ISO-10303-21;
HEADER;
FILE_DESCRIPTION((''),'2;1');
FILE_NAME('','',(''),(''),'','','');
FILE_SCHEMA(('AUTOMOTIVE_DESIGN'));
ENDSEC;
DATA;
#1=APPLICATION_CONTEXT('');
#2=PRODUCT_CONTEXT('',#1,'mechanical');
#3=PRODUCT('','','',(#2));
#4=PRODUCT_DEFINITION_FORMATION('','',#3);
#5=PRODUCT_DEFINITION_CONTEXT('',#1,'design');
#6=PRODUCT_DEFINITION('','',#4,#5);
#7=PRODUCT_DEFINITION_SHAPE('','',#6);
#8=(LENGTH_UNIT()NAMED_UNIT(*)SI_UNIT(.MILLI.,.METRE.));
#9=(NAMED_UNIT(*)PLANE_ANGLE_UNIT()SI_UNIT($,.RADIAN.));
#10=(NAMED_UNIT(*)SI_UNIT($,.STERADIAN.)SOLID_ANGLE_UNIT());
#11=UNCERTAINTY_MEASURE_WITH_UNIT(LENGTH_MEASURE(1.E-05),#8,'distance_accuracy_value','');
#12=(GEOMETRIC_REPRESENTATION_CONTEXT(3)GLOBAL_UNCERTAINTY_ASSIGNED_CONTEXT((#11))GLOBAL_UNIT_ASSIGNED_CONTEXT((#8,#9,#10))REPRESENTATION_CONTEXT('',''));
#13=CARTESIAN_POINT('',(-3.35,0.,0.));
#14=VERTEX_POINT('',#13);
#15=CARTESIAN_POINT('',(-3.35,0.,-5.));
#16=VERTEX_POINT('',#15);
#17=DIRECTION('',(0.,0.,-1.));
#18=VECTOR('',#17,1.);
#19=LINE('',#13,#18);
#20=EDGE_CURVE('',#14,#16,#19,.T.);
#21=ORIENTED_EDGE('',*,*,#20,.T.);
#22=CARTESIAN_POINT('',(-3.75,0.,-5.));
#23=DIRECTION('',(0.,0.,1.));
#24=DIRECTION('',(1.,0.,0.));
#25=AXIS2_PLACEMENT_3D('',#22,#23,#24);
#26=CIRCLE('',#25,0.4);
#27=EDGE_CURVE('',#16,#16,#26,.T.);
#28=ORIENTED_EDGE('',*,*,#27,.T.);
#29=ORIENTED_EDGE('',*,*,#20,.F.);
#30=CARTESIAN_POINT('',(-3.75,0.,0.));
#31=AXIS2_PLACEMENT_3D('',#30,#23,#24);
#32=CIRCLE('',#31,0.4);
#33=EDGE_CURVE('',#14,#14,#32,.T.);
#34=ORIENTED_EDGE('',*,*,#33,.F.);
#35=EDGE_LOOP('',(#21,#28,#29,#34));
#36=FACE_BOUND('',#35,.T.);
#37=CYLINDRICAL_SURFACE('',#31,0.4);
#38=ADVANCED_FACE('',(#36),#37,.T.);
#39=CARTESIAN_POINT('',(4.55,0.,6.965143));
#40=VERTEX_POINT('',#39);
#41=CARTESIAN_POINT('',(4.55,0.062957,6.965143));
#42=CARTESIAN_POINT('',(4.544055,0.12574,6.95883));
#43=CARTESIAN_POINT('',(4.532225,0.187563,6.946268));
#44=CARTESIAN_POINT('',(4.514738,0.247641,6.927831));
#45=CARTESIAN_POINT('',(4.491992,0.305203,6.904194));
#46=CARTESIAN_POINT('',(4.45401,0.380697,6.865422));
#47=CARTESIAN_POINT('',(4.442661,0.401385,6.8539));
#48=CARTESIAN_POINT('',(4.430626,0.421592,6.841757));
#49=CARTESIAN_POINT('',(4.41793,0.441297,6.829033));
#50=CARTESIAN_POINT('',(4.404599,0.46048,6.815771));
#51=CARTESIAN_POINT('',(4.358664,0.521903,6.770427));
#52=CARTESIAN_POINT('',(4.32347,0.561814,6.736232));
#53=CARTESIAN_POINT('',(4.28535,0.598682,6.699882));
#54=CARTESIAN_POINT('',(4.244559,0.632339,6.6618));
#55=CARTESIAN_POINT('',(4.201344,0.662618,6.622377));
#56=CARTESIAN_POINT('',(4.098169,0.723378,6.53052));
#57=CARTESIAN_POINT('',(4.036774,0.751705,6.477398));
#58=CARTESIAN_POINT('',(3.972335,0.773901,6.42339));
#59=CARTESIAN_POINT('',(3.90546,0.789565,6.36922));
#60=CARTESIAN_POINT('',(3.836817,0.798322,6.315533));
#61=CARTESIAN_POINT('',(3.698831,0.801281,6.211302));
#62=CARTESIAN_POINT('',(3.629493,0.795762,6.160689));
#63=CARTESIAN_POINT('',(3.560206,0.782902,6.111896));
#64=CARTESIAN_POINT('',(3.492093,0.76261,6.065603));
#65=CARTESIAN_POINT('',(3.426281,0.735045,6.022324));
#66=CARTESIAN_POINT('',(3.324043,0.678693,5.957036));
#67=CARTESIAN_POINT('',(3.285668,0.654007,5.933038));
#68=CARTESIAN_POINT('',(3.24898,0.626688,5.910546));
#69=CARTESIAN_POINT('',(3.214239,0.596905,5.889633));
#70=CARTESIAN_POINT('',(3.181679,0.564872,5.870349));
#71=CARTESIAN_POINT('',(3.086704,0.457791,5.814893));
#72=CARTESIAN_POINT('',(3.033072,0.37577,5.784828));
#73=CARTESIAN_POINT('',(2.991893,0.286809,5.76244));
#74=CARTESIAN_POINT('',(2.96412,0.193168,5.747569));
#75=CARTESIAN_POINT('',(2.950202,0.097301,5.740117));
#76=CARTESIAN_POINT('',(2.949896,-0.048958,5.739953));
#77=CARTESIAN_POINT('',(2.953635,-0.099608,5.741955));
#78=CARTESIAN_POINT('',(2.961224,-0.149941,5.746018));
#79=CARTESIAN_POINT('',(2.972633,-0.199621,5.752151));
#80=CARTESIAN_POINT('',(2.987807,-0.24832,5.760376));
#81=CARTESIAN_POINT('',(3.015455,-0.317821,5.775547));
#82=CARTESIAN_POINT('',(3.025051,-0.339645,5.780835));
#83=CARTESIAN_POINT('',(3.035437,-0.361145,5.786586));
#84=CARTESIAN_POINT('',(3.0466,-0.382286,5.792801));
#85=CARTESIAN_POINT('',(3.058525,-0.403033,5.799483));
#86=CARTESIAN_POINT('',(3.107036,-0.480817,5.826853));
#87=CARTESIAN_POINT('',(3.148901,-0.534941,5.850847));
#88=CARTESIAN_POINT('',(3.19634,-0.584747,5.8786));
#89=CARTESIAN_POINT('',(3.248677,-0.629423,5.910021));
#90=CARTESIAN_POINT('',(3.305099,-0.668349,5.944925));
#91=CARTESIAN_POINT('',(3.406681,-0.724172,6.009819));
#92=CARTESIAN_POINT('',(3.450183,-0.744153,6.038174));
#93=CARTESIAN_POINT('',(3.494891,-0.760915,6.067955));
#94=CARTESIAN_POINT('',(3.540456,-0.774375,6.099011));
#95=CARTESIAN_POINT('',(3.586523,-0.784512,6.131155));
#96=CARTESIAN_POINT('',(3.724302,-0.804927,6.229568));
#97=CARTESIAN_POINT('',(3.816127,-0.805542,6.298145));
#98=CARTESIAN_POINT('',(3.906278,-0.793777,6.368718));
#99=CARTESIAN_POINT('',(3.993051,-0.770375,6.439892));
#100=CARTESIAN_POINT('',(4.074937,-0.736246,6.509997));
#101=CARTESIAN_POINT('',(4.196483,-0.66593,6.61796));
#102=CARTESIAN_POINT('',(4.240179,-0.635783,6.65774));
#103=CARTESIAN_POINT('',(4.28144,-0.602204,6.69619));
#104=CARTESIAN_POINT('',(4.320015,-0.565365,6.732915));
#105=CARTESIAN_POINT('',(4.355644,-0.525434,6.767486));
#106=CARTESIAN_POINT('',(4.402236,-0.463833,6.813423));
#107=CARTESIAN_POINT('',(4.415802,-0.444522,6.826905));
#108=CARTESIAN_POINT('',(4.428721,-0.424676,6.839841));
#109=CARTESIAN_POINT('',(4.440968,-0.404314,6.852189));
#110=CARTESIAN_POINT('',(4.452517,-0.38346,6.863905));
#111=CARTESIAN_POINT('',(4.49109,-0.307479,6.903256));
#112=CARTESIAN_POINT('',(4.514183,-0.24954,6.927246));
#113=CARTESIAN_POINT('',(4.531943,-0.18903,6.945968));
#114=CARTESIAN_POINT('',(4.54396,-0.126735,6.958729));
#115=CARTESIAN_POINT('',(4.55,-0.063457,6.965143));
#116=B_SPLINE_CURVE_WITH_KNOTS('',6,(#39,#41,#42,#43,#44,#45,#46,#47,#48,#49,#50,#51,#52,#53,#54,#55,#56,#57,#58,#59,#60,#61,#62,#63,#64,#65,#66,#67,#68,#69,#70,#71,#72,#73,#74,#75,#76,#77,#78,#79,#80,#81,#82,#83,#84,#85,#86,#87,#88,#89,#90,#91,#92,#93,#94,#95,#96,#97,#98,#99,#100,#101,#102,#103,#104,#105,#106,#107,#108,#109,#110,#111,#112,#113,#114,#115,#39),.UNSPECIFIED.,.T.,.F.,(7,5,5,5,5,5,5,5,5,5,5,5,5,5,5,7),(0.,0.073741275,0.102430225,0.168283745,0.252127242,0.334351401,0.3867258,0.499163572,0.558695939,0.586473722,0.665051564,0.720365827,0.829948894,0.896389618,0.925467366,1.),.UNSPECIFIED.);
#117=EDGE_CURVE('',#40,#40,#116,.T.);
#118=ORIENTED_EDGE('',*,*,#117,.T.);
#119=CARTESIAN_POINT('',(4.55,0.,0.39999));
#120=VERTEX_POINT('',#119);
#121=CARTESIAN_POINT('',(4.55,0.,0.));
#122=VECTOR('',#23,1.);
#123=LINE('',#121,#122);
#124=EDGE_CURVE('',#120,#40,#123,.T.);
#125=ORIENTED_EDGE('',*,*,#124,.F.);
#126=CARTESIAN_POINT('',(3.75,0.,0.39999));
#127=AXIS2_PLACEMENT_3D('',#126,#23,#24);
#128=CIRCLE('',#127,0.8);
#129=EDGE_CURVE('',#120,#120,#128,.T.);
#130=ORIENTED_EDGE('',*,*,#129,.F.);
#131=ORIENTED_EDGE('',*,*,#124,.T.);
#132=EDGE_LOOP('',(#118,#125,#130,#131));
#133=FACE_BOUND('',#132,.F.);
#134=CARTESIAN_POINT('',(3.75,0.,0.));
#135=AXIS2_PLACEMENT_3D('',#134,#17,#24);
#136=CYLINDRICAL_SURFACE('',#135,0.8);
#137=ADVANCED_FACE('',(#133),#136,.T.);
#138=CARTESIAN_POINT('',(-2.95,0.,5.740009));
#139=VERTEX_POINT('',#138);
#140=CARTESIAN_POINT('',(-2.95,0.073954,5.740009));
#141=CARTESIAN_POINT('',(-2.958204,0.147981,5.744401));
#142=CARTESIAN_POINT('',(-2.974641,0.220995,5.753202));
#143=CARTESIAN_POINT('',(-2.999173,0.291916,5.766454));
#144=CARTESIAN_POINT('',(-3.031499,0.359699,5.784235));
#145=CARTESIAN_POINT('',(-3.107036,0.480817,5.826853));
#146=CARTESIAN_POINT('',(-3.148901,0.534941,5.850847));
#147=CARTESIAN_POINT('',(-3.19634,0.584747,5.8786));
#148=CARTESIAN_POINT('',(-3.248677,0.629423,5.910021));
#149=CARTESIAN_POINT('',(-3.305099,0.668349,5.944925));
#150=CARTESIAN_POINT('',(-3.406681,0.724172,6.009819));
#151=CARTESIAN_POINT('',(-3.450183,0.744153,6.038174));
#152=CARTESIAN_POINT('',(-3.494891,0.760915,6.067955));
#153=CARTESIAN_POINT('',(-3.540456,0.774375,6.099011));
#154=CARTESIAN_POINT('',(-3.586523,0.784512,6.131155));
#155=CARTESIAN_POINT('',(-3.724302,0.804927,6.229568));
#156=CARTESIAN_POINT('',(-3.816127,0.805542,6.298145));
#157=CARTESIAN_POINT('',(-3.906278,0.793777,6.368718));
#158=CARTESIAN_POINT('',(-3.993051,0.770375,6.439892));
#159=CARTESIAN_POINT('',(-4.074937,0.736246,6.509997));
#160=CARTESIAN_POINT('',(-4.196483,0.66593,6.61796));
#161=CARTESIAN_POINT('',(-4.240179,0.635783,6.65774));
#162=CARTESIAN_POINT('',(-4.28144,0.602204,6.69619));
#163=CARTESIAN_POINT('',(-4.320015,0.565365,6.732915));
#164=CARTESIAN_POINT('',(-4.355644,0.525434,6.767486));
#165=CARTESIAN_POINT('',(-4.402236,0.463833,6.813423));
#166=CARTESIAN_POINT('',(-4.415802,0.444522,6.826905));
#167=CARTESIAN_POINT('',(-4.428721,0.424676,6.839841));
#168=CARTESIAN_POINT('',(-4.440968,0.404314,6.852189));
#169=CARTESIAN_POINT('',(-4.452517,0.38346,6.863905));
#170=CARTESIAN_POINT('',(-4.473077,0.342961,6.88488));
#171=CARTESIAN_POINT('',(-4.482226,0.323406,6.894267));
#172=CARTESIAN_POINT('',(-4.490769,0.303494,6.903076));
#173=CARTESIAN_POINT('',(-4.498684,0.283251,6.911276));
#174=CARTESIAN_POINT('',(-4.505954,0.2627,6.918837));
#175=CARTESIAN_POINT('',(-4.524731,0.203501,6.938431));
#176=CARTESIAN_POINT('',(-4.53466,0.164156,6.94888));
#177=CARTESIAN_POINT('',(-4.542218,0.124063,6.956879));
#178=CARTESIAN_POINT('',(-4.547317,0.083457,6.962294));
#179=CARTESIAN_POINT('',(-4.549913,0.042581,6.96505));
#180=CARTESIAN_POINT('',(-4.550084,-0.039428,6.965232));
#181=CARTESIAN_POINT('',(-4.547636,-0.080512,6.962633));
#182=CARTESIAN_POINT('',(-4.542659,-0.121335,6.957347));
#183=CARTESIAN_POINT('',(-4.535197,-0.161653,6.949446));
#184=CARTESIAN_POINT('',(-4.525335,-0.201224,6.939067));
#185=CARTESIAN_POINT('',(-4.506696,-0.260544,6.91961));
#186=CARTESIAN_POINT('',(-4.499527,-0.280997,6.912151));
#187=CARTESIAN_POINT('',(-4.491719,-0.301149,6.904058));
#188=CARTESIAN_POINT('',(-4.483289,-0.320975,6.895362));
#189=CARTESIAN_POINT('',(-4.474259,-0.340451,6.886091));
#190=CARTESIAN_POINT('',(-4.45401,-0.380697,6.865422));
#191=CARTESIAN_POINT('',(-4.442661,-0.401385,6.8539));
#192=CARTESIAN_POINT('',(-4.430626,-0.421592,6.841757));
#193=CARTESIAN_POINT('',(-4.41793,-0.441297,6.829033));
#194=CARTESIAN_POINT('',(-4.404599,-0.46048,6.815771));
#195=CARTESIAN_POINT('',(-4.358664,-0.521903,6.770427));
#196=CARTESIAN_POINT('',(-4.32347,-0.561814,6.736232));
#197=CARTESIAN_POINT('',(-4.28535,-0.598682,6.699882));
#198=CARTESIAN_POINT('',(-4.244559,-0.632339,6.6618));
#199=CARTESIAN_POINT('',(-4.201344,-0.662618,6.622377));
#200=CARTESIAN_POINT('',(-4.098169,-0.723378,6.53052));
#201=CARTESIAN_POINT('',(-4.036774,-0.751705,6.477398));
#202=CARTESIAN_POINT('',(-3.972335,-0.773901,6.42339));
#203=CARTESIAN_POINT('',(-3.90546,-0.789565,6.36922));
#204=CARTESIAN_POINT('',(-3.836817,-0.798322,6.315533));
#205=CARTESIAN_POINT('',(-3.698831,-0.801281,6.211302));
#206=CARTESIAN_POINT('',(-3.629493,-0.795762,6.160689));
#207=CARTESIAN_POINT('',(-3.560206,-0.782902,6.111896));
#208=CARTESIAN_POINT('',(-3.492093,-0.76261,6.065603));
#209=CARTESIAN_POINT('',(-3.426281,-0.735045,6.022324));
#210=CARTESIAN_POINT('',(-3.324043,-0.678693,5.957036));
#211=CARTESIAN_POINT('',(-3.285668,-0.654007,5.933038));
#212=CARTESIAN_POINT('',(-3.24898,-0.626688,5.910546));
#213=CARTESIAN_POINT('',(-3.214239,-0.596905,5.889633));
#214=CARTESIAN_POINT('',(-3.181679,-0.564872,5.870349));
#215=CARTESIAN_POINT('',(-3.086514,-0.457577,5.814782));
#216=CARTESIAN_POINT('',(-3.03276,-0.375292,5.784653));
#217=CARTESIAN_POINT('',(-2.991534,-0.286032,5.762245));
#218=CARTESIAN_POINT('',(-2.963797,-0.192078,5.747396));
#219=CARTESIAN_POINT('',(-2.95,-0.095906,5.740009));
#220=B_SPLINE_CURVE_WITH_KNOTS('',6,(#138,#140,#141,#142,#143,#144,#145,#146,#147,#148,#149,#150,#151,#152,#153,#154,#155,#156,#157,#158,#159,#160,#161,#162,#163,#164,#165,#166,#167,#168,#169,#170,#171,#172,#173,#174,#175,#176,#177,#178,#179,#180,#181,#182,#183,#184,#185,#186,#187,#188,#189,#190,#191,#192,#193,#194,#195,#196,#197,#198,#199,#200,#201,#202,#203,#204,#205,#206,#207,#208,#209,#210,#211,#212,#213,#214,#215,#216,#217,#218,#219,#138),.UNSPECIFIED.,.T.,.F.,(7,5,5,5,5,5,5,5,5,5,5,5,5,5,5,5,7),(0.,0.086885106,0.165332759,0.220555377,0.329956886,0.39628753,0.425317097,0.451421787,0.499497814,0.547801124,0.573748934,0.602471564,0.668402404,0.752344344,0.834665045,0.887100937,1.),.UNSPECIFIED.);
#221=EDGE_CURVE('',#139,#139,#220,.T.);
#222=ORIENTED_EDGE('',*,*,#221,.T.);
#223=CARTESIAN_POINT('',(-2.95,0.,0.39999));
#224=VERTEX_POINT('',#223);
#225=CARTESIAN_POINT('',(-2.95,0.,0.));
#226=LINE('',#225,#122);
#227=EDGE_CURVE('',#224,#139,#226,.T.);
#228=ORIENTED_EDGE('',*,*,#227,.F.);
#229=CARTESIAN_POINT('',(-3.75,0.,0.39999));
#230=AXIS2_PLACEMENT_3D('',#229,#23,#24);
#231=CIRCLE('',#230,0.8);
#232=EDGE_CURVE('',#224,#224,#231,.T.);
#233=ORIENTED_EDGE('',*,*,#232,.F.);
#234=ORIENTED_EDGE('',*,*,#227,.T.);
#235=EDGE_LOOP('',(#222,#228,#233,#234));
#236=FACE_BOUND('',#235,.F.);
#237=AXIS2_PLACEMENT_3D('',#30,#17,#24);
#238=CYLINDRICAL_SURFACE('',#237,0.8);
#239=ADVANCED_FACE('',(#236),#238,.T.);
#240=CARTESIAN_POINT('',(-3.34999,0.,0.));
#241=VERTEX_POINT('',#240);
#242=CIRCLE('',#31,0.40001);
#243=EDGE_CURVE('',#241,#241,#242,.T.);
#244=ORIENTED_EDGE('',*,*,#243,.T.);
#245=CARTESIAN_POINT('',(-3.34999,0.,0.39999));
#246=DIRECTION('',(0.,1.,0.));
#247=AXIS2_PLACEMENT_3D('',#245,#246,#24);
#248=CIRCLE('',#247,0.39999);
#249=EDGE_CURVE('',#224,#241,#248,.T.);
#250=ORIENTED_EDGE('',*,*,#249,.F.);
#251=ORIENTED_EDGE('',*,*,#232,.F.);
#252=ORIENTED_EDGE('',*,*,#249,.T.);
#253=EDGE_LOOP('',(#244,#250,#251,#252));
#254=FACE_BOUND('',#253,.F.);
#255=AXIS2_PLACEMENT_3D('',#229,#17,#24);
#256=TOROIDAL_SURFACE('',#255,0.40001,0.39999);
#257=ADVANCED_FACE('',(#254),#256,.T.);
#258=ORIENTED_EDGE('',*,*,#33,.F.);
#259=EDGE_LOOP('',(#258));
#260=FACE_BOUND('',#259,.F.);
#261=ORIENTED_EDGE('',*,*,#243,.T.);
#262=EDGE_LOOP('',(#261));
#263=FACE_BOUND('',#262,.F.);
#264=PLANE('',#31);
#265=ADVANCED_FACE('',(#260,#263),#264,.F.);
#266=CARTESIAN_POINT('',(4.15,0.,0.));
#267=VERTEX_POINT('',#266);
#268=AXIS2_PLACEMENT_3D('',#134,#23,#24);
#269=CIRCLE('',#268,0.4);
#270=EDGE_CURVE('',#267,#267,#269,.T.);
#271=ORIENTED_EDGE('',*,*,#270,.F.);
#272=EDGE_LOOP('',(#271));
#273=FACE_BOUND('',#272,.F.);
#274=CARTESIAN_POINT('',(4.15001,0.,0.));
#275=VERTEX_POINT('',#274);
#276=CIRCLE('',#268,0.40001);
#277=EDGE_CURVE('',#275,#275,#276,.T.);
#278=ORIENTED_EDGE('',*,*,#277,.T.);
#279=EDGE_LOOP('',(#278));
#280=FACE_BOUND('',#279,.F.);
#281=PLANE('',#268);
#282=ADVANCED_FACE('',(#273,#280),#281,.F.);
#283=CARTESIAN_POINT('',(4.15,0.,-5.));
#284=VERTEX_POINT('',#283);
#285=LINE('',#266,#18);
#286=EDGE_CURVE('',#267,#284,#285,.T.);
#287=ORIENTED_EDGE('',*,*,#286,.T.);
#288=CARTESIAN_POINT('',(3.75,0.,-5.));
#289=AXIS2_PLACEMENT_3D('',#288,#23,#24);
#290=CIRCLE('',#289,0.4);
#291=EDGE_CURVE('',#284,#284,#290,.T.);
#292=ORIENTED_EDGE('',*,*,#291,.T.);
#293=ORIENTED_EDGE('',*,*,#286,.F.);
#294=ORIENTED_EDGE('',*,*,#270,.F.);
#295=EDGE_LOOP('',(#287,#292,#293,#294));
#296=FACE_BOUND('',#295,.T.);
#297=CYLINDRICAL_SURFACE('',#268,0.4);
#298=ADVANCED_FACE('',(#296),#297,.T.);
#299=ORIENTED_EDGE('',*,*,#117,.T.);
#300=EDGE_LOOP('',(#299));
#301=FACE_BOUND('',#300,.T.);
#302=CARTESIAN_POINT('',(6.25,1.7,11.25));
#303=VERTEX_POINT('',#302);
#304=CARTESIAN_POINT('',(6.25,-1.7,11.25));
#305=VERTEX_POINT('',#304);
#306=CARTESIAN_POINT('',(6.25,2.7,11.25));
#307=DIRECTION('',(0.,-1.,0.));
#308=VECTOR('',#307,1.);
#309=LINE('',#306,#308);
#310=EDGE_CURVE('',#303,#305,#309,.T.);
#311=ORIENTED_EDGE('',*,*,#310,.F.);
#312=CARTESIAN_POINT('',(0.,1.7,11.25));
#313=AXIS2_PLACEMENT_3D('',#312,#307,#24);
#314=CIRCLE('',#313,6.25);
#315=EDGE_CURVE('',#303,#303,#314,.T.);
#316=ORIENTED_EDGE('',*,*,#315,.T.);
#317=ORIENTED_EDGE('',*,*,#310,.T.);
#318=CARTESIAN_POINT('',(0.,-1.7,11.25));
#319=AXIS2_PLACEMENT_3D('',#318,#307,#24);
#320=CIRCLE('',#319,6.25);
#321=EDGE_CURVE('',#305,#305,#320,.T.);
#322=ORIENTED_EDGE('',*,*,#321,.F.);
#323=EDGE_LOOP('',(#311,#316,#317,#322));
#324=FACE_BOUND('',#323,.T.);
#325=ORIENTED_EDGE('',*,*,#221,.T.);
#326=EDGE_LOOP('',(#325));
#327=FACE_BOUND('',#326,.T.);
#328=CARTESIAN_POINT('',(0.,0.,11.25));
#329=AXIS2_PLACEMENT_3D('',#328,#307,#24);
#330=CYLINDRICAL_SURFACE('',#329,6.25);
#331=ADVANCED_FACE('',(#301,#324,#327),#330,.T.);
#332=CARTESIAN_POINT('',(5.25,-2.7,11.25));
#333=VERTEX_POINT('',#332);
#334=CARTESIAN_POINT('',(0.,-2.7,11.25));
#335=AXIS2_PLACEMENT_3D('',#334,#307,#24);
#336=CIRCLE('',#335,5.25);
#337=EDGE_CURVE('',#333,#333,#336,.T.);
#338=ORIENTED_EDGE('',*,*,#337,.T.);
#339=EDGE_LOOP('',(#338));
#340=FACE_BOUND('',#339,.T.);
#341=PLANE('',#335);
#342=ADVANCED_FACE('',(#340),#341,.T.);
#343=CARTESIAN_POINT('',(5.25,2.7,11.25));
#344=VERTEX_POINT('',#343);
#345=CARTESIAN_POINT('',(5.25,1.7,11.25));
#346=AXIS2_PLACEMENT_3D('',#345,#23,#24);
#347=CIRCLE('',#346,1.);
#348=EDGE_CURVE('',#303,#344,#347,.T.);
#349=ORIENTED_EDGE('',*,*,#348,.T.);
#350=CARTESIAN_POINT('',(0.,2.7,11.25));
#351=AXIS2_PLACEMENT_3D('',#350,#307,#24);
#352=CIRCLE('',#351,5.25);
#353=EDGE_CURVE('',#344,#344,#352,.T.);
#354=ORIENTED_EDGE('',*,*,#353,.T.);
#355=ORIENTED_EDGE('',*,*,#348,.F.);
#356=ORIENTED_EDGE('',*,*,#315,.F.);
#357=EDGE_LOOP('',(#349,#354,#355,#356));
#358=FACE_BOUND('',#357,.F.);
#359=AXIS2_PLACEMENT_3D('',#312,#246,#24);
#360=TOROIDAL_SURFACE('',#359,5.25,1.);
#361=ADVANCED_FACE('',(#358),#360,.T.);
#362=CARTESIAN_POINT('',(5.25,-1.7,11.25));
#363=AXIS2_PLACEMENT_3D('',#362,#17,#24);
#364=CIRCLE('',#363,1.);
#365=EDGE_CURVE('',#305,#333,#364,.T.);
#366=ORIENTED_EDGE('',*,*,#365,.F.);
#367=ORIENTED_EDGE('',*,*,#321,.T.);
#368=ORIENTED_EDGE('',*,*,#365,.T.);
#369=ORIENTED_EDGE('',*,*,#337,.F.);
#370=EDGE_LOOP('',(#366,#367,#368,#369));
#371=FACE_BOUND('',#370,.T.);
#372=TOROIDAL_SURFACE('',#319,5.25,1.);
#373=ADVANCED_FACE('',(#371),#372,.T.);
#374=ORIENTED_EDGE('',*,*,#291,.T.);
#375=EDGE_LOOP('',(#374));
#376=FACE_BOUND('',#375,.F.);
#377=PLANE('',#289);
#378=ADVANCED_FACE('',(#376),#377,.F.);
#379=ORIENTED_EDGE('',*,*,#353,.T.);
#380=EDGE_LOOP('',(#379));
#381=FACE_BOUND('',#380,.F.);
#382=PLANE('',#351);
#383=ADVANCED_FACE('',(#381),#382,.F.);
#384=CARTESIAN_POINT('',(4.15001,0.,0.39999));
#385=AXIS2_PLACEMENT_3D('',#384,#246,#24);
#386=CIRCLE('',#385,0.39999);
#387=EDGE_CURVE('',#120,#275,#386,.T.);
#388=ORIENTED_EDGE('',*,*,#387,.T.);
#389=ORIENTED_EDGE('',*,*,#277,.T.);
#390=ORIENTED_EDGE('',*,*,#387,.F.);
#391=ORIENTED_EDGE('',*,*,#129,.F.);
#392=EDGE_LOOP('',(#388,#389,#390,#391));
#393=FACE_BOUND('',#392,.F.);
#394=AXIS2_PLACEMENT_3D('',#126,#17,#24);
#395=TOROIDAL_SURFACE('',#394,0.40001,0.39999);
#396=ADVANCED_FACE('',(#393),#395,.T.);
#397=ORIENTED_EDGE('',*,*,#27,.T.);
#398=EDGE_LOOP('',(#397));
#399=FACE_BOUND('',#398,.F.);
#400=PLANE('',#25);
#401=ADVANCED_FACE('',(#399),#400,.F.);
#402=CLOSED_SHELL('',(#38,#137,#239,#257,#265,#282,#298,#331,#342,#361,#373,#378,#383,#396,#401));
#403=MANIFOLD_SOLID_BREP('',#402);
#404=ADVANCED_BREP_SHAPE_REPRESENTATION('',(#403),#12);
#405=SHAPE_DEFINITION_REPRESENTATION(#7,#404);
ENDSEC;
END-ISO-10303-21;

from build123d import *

# Parameters (mm, degrees)
F0_R     = 6.25
F1_DEPTH = 2.7
F2_R     = 0.8
F2_R_2   = 0.4
F4_DEPTH = 5
F5_R     = 0.39999
F6_R     = 1


# Not quite as in the source:
# - a fillet or chamfer is up to 0.001 mm smaller than in the source, because OpenCascade refuses the exact size
# - a feature names something its author has since deleted; it is built from what else it names


with BuildPart() as f1:
    # F0 (on Front) → F1 (new body, symmetric)
    with BuildSketch(Plane.XZ):
        with Locations((0, 11.25)):
            Circle(F0_R)
    extrude(amount=F1_DEPTH, both=True)

    # F2 (on Top) → F3 (join, up to the next surface of F1)
    with BuildSketch(Plane.XY):
        with Locations((-3.75, 0)):
            Circle(F2_R)
        with Locations((-3.75, 0)):
            Circle(F2_R_2, mode=Mode.SUBTRACT)
        with Locations((3.75, 0)):
            Circle(F2_R)
        with Locations((3.75, 0)):
            Circle(F2_R_2, mode=Mode.SUBTRACT)
        with Locations((-3.75, 0)):
            Circle(F2_R_2)
        with Locations((3.75, 0)):
            Circle(F2_R_2)
    extrude(until=Until.NEXT)

    # F2 (on Top) → F4 (join)
    with BuildSketch(Plane.XY):
        with Locations((-3.75, 0)):
            Circle(F2_R_2)
        with Locations((3.75, 0)):
            Circle(F2_R_2)
    extrude(amount=-F4_DEPTH)

    # F5 (radius 0.4 in the source; OpenCascade refuses exactly that, so slightly less here)
    f5_edges = [f1.edges().sort_by_distance(p)[0] for p in [
        (-4.55, 0, 0),
        (2.95, 0, 0),
    ]]
    fillet(f5_edges, radius=F5_R)

    # F6
    f6_edges = [f1.edges().sort_by_distance(p)[0] for p in [
        (-6.25, -2.7, 11.25),
        (-6.25, 2.7, 11.25),
    ]]
    fillet(f6_edges, radius=F6_R)


solid = f1.part
